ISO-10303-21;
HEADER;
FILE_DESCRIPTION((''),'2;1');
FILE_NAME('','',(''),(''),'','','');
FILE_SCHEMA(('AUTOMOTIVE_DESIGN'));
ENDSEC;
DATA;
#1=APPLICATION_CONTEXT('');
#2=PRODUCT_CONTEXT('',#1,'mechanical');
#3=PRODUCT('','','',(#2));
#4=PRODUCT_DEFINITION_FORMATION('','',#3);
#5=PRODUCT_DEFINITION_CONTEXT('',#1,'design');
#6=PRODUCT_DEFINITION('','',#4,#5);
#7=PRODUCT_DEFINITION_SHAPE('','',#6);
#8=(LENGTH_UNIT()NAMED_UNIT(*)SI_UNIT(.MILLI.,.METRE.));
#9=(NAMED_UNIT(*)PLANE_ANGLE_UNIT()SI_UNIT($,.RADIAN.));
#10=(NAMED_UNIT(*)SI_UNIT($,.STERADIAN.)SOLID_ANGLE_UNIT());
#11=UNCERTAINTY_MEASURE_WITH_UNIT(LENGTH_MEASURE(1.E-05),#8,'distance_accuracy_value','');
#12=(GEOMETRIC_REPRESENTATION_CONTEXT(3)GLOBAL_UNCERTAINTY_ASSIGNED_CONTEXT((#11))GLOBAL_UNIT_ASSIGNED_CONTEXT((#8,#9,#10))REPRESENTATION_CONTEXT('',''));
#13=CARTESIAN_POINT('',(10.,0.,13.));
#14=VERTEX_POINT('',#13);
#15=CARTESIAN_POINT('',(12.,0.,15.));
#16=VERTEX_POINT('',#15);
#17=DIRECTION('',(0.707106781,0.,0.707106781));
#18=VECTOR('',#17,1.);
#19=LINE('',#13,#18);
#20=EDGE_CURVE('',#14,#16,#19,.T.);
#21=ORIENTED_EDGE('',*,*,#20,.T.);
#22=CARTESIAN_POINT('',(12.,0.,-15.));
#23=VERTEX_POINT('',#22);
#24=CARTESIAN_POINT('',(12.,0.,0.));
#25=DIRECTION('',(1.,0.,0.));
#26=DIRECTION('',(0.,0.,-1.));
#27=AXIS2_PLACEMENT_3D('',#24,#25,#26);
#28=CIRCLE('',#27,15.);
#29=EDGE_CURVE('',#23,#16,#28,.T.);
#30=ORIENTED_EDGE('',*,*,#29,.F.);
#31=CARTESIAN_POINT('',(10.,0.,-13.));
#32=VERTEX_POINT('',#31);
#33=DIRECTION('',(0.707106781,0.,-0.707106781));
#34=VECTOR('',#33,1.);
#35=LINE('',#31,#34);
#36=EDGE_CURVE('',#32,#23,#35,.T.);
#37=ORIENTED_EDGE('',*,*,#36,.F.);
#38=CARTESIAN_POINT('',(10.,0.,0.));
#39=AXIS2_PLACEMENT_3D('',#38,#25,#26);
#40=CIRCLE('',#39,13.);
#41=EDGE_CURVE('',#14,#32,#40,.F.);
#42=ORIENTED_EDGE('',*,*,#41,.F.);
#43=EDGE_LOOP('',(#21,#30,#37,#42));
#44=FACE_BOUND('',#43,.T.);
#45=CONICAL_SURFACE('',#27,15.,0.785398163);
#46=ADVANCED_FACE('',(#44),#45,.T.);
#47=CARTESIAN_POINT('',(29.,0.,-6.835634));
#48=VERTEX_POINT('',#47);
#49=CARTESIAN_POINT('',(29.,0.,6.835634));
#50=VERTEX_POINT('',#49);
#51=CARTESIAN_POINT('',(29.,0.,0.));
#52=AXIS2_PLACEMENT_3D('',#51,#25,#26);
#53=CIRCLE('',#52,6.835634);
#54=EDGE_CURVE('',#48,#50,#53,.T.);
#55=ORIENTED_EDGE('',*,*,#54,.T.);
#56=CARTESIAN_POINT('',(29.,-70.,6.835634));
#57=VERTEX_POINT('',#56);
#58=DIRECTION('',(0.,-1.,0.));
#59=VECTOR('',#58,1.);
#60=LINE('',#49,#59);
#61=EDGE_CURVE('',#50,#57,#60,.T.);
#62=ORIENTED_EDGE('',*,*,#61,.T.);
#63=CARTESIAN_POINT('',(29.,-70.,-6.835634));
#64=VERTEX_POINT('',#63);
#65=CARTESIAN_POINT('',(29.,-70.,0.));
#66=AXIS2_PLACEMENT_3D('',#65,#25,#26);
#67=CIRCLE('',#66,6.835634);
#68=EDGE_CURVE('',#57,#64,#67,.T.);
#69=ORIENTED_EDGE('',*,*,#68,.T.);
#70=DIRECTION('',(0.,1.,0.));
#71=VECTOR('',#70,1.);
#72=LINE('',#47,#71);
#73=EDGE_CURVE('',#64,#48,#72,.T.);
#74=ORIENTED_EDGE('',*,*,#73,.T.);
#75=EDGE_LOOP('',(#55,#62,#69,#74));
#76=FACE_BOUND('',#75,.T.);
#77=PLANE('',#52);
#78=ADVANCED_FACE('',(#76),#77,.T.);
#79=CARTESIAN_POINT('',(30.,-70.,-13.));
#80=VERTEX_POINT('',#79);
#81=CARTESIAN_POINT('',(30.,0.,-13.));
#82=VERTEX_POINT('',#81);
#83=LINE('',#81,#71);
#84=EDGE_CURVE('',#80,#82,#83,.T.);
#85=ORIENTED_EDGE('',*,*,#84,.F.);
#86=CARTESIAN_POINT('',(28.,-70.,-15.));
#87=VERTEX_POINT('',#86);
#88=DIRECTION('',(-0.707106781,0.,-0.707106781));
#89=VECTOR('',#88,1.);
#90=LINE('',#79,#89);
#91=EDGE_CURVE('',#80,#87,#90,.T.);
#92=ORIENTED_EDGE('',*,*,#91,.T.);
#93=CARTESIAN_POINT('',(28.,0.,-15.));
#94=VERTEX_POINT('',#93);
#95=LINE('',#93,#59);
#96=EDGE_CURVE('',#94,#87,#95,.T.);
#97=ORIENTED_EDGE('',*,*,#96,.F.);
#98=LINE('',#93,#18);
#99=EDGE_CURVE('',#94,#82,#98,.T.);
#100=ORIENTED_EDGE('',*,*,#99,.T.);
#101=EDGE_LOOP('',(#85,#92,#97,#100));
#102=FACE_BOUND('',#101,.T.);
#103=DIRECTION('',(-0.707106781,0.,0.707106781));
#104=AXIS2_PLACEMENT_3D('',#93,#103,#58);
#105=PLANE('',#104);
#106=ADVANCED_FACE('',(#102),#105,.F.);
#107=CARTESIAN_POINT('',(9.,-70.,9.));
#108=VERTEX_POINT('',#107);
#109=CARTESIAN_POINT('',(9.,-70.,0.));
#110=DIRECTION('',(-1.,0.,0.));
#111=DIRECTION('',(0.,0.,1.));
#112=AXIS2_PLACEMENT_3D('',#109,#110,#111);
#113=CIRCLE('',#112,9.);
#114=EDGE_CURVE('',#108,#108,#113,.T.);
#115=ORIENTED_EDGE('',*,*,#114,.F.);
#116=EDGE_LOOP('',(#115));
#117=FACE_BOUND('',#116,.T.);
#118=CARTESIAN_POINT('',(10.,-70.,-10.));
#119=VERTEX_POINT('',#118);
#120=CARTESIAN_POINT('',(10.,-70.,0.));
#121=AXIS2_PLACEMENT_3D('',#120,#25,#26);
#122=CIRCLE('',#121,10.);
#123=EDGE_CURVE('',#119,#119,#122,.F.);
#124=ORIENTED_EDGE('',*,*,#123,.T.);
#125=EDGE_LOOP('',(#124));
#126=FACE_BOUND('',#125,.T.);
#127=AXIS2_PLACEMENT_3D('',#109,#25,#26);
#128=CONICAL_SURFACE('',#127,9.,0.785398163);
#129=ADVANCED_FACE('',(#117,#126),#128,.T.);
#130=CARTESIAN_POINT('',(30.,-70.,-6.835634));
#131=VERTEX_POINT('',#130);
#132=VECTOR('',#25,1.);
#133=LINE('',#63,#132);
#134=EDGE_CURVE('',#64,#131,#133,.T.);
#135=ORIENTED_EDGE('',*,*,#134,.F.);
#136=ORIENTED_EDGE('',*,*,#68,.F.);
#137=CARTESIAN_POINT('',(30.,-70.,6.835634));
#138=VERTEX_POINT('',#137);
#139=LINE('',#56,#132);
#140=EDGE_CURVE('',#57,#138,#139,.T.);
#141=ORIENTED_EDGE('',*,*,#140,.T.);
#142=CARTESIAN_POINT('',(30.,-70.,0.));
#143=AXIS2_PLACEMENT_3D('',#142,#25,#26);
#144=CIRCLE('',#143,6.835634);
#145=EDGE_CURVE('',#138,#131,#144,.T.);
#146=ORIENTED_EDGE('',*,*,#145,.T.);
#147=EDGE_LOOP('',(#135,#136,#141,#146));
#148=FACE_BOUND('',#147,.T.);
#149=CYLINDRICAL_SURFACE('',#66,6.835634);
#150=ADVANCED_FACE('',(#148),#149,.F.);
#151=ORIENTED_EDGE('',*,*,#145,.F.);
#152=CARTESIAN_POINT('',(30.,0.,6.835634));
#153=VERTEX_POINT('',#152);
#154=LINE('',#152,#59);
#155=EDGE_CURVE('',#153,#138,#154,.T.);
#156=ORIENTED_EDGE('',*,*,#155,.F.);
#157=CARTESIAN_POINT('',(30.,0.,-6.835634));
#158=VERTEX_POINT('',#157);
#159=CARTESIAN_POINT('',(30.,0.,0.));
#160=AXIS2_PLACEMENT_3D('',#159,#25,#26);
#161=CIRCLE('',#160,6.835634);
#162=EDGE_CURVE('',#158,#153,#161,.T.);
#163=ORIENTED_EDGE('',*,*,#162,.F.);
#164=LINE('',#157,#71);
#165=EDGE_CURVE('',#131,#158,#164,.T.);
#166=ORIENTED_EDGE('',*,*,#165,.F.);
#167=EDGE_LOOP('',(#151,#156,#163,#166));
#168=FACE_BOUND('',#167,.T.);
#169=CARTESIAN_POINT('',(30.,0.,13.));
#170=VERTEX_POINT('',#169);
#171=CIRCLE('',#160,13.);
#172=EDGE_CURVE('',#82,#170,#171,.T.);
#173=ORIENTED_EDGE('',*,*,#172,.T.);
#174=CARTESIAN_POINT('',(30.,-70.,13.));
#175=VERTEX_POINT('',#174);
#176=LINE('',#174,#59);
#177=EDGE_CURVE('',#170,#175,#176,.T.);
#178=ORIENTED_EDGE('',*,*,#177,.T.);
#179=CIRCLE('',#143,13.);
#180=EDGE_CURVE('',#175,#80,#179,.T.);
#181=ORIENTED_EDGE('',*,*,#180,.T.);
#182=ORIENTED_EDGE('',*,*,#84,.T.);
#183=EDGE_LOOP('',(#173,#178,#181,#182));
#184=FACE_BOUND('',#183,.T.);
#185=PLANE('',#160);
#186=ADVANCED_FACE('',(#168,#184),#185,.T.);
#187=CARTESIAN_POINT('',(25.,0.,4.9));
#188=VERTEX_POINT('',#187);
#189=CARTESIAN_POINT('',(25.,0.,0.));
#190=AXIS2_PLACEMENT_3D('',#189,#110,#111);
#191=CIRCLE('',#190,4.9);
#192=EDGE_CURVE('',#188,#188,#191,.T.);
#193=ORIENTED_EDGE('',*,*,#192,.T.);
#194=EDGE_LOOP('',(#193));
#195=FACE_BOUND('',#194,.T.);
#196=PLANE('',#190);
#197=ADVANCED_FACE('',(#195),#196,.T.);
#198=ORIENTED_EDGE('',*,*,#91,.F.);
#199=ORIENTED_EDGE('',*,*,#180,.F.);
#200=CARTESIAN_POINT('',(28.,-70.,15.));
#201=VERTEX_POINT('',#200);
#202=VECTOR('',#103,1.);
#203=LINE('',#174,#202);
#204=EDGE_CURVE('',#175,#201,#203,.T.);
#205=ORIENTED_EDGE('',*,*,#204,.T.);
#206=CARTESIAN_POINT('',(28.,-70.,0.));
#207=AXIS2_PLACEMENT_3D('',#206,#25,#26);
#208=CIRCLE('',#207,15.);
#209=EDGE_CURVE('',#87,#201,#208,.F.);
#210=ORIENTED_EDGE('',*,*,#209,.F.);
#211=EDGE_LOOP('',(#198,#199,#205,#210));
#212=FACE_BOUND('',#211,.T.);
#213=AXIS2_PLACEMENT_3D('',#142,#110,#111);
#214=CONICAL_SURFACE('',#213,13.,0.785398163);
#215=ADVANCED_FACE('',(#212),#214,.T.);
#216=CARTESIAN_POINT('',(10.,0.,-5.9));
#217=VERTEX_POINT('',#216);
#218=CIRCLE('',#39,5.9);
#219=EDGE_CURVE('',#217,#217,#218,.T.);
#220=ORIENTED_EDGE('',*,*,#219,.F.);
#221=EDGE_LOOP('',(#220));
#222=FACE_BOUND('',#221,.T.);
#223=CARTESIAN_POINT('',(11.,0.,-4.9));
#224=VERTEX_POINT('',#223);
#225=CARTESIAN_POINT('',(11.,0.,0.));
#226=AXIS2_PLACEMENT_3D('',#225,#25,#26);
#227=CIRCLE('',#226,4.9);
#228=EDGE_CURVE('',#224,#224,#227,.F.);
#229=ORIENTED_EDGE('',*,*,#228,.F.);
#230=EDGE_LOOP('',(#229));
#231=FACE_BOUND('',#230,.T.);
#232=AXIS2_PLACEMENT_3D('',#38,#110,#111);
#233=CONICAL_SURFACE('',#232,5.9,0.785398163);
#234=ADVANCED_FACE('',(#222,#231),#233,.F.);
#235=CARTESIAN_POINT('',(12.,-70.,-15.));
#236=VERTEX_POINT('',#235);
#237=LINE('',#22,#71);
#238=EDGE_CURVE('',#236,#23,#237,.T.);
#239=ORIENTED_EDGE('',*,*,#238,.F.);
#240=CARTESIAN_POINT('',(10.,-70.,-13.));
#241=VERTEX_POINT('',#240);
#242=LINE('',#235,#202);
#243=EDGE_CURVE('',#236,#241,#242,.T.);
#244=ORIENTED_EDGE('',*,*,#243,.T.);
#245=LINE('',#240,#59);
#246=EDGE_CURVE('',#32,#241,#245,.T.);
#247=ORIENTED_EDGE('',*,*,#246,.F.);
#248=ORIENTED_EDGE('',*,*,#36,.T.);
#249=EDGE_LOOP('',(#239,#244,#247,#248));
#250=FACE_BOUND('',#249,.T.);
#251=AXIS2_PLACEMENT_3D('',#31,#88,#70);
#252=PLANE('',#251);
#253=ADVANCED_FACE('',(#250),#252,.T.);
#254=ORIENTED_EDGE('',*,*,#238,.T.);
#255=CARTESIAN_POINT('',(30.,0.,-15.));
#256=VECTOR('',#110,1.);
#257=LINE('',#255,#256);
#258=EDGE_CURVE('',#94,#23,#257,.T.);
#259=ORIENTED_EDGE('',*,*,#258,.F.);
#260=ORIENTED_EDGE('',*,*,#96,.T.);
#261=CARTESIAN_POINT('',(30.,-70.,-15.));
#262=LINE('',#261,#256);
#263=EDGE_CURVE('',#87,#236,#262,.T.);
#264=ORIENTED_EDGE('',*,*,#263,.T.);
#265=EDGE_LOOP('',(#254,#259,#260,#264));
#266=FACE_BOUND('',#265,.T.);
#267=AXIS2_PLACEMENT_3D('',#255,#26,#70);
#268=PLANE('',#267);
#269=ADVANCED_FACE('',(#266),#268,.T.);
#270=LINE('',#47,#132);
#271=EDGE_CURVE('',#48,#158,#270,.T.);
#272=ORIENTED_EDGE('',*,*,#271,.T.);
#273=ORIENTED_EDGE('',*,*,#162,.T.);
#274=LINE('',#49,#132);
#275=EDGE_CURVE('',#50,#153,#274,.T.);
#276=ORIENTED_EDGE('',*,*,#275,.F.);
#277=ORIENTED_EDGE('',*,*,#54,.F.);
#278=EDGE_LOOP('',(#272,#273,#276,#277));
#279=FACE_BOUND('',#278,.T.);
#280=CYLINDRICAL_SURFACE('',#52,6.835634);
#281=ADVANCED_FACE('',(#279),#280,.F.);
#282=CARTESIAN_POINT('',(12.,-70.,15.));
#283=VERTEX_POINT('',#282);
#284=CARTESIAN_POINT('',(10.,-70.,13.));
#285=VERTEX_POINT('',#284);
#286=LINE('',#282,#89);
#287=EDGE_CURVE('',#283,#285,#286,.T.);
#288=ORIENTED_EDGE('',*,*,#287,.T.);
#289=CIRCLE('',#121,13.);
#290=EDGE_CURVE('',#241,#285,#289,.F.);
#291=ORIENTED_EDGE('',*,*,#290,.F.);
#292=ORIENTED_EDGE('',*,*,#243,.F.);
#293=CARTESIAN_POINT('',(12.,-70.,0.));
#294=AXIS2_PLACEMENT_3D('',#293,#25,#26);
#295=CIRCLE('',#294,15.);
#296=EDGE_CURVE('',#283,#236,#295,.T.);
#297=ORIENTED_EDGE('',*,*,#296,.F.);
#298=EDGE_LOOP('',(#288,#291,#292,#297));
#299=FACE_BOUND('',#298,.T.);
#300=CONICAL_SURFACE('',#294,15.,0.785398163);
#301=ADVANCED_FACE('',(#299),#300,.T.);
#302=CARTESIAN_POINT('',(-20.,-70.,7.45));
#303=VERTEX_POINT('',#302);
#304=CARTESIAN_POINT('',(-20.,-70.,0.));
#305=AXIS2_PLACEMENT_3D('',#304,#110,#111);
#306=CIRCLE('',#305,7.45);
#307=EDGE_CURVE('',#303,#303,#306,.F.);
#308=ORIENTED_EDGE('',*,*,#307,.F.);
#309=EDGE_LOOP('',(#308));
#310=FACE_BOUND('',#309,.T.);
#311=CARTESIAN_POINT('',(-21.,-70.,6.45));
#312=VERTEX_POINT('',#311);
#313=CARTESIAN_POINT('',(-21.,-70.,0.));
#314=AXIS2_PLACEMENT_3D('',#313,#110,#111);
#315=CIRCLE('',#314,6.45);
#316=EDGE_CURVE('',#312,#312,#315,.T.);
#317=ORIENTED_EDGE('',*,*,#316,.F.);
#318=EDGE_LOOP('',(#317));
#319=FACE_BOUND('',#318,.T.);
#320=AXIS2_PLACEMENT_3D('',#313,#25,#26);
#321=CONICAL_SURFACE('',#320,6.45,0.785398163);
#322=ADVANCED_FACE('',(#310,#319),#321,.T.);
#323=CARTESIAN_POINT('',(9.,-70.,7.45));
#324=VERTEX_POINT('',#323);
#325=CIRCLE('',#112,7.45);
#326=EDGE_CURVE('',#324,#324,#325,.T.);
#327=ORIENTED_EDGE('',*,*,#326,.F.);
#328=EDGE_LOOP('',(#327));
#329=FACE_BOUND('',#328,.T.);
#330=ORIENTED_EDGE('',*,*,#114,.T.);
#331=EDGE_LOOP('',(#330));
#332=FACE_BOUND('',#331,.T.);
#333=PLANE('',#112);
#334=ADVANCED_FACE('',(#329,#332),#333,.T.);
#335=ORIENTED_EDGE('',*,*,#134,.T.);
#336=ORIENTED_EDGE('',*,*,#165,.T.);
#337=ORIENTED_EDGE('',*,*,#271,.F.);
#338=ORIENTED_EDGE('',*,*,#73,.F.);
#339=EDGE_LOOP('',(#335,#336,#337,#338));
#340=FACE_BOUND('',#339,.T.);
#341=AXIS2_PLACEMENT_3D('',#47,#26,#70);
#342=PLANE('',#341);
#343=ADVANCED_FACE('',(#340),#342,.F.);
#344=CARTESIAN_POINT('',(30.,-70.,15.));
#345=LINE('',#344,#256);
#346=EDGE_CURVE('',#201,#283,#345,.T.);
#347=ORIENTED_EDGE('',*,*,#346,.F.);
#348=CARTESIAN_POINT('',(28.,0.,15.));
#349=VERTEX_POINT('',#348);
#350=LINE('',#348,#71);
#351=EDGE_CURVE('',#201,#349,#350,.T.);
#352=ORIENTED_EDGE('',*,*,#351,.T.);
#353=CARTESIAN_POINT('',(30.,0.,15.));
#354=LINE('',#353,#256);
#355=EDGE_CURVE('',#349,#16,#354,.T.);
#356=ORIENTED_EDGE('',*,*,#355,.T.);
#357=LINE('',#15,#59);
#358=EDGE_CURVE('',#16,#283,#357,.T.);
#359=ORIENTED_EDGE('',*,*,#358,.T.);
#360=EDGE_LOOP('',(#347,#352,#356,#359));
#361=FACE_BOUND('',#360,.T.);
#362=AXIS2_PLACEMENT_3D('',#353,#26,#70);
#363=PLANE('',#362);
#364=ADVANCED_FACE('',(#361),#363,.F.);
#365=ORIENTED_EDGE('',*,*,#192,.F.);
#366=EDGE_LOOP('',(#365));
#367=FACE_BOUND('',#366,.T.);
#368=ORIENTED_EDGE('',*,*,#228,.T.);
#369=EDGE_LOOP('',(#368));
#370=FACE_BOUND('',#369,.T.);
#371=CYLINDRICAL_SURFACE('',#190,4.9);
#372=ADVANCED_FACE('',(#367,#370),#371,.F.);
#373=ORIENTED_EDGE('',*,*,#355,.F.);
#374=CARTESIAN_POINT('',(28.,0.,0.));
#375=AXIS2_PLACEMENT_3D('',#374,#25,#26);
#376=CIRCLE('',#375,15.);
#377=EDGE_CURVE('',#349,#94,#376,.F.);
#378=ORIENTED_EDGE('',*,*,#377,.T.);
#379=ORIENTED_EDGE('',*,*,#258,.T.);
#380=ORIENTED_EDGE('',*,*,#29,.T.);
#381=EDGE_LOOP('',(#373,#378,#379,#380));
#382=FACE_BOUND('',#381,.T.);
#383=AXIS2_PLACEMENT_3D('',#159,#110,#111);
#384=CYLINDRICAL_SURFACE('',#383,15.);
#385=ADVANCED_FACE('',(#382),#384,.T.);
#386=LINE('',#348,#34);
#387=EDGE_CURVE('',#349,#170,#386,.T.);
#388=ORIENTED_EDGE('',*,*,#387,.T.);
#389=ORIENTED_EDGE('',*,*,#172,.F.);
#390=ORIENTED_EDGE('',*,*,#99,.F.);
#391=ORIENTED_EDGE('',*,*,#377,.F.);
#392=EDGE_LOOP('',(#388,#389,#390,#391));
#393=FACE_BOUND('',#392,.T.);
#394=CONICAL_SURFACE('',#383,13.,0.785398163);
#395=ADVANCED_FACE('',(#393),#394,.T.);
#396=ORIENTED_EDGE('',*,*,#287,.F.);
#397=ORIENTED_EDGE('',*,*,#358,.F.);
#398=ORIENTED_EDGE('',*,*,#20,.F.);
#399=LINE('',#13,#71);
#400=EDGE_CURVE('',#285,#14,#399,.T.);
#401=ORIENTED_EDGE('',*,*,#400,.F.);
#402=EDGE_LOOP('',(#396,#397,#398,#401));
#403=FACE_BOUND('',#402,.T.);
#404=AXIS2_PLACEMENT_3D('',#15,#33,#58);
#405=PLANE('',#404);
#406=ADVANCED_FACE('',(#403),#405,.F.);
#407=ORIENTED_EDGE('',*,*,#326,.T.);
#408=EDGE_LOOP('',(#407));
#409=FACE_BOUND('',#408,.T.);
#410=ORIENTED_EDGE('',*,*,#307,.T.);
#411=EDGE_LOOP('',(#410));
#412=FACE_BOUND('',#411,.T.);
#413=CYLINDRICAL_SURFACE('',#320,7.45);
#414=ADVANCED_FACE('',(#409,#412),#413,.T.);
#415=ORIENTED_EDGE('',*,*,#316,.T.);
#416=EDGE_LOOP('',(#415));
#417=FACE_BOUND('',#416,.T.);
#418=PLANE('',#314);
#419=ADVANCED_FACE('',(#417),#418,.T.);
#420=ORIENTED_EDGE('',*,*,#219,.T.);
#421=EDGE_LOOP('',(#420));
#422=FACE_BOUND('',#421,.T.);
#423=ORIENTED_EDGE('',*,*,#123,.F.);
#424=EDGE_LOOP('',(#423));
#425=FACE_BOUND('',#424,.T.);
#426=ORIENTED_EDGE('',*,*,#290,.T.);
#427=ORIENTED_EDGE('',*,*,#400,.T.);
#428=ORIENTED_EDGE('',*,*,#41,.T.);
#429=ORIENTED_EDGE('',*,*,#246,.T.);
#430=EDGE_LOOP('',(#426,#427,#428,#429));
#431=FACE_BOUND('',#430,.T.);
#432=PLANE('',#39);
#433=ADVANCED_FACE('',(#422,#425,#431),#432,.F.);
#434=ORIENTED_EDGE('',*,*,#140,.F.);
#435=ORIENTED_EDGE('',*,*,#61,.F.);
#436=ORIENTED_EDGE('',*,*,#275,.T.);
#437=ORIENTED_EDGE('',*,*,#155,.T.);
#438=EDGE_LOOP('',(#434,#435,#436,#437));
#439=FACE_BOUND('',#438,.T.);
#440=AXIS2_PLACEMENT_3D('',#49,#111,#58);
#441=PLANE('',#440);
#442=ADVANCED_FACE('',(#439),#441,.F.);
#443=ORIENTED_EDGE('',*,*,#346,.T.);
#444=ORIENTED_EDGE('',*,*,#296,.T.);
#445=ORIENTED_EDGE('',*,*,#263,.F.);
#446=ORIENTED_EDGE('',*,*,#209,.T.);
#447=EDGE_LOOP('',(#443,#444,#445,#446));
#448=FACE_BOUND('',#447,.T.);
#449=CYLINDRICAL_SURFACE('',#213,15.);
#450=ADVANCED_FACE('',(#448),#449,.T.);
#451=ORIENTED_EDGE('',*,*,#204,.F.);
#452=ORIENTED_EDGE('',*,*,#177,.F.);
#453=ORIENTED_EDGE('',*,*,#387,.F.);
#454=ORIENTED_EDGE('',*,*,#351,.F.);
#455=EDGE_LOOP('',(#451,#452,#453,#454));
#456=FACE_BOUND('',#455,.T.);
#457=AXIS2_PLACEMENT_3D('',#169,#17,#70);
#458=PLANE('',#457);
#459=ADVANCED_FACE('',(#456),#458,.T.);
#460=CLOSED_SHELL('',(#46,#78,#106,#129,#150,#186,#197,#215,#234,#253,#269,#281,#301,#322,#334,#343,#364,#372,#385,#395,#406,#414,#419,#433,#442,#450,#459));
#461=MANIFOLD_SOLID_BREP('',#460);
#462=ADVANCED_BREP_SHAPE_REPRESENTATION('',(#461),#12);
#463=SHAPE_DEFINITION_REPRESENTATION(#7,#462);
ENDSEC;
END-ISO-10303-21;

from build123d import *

# Parameters (mm, degrees)
SKETCH_1_R          = 4.9
EXTRUDE_1_DEPTH     = 10
EXTRUDE_2_DEPTH     = 20
SKETCH_3_R          = 7.45
EXTRUDE_3_DEPTH     = 31
CHAMFER_1_SIZE      = 2
CUT_EXTRUDE_1_DEPTH = 1
SKETCH_5_R          = 4.9
CUT_EXTRUDE_2_DEPTH = 25
SKETCH_9_R          = 10
EXTRUDE_4_DEPTH     = 1
CHAMFER_2_SIZE      = 1
CHAMFER_4_SIZE      = 1
CHAMFER_5_SIZE      = 1


with BuildPart() as part:
    # 草图1 → 凸台-拉伸1 (new body)
    with BuildSketch(Plane(origin=(0, 0, 0), x_dir=(0, 0, -1), z_dir=(1, 0, 0))):
        Circle(SKETCH_1_R)
    extrude(amount=EXTRUDE_1_DEPTH)

    # 草图2 → 凸台-拉伸2 (add)
    with BuildSketch(Plane(origin=(10, 0, 0), x_dir=(0, 0, -1), z_dir=(1, 0, 0))):
        with BuildLine():
            Line((15, 0), (15, -70))
            ThreePointArc((15, -70), (0, -85), (-15, -70))
            Line((-15, -70), (-15, 0))
            ThreePointArc((-15, 0), (0, 15), (15, 0))
        make_face()
    extrude(amount=EXTRUDE_2_DEPTH)

    # 草图3 → 凸台-拉伸3 (add)
    with BuildSketch(Plane.ZY.offset(-10)):
        with Locations(Location((0, -70, 0), (0, 0, 180))):
            Circle(SKETCH_3_R)
    extrude(amount=EXTRUDE_3_DEPTH)

    # 倒角1
    chamfer_1_edges = [part.edges().sort_by_distance(p)[0] for p in [
        (10, -35, 15),
        (10, -85, 0),
        (30, -35, -15),
        (10, 15, 0),
        (30, -35, 15),
        (30, -85, 0),
        (30, 15, 0),
        (10, -35, -15),
    ]]
    chamfer(chamfer_1_edges, length=CHAMFER_1_SIZE)

    # 草图4 → 切除-拉伸1 (cut)
    with BuildSketch(Plane(origin=(30, 0, 0), x_dir=(0, 0, -1), z_dir=(1, 0, 0))):
        with BuildLine():
            Line((6.835634275, 0), (6.835634275, -70))
            ThreePointArc((6.835634275, -70), (0, -76.835634275), (-6.835634275, -70))
            Line((-6.835634275, -70), (-6.835634275, 0))
            ThreePointArc((-6.835634275, 0), (0, 6.835634275), (6.835634275, 0))
        make_face()
    extrude(amount=-CUT_EXTRUDE_1_DEPTH, mode=Mode.SUBTRACT)

    # 草图5 → 切除-拉伸2 (cut)
    with BuildSketch(Plane.ZY):
        Circle(SKETCH_5_R)
    extrude(amount=-CUT_EXTRUDE_2_DEPTH, mode=Mode.SUBTRACT)

    # 草图9 → 凸台-拉伸4 (add)
    with BuildSketch(Plane.ZY.offset(-10)):
        with Locations(Location((0, -70, 0), (0, 0, 180))):
            Circle(SKETCH_9_R)
    extrude(amount=EXTRUDE_4_DEPTH)

    # 倒角2
    chamfer_2_edges = [part.edges().sort_by_distance(p)[0] for p in [
        (9, -70, 10),
    ]]
    chamfer(chamfer_2_edges, length=CHAMFER_2_SIZE - 0.0001)  # a hair under: the kernel refuses the full size

    # 倒角4
    chamfer_4_edges = [part.edges().sort_by_distance(p)[0] for p in [
        (10, 0, -4.9),
    ]]
    chamfer(chamfer_4_edges, length=CHAMFER_4_SIZE)

    # 倒角5
    chamfer_5_edges = [part.edges().sort_by_distance(p)[0] for p in [
        (-21, -70, 7.45),
    ]]
    chamfer(chamfer_5_edges, length=CHAMFER_5_SIZE)


solid = part.part
